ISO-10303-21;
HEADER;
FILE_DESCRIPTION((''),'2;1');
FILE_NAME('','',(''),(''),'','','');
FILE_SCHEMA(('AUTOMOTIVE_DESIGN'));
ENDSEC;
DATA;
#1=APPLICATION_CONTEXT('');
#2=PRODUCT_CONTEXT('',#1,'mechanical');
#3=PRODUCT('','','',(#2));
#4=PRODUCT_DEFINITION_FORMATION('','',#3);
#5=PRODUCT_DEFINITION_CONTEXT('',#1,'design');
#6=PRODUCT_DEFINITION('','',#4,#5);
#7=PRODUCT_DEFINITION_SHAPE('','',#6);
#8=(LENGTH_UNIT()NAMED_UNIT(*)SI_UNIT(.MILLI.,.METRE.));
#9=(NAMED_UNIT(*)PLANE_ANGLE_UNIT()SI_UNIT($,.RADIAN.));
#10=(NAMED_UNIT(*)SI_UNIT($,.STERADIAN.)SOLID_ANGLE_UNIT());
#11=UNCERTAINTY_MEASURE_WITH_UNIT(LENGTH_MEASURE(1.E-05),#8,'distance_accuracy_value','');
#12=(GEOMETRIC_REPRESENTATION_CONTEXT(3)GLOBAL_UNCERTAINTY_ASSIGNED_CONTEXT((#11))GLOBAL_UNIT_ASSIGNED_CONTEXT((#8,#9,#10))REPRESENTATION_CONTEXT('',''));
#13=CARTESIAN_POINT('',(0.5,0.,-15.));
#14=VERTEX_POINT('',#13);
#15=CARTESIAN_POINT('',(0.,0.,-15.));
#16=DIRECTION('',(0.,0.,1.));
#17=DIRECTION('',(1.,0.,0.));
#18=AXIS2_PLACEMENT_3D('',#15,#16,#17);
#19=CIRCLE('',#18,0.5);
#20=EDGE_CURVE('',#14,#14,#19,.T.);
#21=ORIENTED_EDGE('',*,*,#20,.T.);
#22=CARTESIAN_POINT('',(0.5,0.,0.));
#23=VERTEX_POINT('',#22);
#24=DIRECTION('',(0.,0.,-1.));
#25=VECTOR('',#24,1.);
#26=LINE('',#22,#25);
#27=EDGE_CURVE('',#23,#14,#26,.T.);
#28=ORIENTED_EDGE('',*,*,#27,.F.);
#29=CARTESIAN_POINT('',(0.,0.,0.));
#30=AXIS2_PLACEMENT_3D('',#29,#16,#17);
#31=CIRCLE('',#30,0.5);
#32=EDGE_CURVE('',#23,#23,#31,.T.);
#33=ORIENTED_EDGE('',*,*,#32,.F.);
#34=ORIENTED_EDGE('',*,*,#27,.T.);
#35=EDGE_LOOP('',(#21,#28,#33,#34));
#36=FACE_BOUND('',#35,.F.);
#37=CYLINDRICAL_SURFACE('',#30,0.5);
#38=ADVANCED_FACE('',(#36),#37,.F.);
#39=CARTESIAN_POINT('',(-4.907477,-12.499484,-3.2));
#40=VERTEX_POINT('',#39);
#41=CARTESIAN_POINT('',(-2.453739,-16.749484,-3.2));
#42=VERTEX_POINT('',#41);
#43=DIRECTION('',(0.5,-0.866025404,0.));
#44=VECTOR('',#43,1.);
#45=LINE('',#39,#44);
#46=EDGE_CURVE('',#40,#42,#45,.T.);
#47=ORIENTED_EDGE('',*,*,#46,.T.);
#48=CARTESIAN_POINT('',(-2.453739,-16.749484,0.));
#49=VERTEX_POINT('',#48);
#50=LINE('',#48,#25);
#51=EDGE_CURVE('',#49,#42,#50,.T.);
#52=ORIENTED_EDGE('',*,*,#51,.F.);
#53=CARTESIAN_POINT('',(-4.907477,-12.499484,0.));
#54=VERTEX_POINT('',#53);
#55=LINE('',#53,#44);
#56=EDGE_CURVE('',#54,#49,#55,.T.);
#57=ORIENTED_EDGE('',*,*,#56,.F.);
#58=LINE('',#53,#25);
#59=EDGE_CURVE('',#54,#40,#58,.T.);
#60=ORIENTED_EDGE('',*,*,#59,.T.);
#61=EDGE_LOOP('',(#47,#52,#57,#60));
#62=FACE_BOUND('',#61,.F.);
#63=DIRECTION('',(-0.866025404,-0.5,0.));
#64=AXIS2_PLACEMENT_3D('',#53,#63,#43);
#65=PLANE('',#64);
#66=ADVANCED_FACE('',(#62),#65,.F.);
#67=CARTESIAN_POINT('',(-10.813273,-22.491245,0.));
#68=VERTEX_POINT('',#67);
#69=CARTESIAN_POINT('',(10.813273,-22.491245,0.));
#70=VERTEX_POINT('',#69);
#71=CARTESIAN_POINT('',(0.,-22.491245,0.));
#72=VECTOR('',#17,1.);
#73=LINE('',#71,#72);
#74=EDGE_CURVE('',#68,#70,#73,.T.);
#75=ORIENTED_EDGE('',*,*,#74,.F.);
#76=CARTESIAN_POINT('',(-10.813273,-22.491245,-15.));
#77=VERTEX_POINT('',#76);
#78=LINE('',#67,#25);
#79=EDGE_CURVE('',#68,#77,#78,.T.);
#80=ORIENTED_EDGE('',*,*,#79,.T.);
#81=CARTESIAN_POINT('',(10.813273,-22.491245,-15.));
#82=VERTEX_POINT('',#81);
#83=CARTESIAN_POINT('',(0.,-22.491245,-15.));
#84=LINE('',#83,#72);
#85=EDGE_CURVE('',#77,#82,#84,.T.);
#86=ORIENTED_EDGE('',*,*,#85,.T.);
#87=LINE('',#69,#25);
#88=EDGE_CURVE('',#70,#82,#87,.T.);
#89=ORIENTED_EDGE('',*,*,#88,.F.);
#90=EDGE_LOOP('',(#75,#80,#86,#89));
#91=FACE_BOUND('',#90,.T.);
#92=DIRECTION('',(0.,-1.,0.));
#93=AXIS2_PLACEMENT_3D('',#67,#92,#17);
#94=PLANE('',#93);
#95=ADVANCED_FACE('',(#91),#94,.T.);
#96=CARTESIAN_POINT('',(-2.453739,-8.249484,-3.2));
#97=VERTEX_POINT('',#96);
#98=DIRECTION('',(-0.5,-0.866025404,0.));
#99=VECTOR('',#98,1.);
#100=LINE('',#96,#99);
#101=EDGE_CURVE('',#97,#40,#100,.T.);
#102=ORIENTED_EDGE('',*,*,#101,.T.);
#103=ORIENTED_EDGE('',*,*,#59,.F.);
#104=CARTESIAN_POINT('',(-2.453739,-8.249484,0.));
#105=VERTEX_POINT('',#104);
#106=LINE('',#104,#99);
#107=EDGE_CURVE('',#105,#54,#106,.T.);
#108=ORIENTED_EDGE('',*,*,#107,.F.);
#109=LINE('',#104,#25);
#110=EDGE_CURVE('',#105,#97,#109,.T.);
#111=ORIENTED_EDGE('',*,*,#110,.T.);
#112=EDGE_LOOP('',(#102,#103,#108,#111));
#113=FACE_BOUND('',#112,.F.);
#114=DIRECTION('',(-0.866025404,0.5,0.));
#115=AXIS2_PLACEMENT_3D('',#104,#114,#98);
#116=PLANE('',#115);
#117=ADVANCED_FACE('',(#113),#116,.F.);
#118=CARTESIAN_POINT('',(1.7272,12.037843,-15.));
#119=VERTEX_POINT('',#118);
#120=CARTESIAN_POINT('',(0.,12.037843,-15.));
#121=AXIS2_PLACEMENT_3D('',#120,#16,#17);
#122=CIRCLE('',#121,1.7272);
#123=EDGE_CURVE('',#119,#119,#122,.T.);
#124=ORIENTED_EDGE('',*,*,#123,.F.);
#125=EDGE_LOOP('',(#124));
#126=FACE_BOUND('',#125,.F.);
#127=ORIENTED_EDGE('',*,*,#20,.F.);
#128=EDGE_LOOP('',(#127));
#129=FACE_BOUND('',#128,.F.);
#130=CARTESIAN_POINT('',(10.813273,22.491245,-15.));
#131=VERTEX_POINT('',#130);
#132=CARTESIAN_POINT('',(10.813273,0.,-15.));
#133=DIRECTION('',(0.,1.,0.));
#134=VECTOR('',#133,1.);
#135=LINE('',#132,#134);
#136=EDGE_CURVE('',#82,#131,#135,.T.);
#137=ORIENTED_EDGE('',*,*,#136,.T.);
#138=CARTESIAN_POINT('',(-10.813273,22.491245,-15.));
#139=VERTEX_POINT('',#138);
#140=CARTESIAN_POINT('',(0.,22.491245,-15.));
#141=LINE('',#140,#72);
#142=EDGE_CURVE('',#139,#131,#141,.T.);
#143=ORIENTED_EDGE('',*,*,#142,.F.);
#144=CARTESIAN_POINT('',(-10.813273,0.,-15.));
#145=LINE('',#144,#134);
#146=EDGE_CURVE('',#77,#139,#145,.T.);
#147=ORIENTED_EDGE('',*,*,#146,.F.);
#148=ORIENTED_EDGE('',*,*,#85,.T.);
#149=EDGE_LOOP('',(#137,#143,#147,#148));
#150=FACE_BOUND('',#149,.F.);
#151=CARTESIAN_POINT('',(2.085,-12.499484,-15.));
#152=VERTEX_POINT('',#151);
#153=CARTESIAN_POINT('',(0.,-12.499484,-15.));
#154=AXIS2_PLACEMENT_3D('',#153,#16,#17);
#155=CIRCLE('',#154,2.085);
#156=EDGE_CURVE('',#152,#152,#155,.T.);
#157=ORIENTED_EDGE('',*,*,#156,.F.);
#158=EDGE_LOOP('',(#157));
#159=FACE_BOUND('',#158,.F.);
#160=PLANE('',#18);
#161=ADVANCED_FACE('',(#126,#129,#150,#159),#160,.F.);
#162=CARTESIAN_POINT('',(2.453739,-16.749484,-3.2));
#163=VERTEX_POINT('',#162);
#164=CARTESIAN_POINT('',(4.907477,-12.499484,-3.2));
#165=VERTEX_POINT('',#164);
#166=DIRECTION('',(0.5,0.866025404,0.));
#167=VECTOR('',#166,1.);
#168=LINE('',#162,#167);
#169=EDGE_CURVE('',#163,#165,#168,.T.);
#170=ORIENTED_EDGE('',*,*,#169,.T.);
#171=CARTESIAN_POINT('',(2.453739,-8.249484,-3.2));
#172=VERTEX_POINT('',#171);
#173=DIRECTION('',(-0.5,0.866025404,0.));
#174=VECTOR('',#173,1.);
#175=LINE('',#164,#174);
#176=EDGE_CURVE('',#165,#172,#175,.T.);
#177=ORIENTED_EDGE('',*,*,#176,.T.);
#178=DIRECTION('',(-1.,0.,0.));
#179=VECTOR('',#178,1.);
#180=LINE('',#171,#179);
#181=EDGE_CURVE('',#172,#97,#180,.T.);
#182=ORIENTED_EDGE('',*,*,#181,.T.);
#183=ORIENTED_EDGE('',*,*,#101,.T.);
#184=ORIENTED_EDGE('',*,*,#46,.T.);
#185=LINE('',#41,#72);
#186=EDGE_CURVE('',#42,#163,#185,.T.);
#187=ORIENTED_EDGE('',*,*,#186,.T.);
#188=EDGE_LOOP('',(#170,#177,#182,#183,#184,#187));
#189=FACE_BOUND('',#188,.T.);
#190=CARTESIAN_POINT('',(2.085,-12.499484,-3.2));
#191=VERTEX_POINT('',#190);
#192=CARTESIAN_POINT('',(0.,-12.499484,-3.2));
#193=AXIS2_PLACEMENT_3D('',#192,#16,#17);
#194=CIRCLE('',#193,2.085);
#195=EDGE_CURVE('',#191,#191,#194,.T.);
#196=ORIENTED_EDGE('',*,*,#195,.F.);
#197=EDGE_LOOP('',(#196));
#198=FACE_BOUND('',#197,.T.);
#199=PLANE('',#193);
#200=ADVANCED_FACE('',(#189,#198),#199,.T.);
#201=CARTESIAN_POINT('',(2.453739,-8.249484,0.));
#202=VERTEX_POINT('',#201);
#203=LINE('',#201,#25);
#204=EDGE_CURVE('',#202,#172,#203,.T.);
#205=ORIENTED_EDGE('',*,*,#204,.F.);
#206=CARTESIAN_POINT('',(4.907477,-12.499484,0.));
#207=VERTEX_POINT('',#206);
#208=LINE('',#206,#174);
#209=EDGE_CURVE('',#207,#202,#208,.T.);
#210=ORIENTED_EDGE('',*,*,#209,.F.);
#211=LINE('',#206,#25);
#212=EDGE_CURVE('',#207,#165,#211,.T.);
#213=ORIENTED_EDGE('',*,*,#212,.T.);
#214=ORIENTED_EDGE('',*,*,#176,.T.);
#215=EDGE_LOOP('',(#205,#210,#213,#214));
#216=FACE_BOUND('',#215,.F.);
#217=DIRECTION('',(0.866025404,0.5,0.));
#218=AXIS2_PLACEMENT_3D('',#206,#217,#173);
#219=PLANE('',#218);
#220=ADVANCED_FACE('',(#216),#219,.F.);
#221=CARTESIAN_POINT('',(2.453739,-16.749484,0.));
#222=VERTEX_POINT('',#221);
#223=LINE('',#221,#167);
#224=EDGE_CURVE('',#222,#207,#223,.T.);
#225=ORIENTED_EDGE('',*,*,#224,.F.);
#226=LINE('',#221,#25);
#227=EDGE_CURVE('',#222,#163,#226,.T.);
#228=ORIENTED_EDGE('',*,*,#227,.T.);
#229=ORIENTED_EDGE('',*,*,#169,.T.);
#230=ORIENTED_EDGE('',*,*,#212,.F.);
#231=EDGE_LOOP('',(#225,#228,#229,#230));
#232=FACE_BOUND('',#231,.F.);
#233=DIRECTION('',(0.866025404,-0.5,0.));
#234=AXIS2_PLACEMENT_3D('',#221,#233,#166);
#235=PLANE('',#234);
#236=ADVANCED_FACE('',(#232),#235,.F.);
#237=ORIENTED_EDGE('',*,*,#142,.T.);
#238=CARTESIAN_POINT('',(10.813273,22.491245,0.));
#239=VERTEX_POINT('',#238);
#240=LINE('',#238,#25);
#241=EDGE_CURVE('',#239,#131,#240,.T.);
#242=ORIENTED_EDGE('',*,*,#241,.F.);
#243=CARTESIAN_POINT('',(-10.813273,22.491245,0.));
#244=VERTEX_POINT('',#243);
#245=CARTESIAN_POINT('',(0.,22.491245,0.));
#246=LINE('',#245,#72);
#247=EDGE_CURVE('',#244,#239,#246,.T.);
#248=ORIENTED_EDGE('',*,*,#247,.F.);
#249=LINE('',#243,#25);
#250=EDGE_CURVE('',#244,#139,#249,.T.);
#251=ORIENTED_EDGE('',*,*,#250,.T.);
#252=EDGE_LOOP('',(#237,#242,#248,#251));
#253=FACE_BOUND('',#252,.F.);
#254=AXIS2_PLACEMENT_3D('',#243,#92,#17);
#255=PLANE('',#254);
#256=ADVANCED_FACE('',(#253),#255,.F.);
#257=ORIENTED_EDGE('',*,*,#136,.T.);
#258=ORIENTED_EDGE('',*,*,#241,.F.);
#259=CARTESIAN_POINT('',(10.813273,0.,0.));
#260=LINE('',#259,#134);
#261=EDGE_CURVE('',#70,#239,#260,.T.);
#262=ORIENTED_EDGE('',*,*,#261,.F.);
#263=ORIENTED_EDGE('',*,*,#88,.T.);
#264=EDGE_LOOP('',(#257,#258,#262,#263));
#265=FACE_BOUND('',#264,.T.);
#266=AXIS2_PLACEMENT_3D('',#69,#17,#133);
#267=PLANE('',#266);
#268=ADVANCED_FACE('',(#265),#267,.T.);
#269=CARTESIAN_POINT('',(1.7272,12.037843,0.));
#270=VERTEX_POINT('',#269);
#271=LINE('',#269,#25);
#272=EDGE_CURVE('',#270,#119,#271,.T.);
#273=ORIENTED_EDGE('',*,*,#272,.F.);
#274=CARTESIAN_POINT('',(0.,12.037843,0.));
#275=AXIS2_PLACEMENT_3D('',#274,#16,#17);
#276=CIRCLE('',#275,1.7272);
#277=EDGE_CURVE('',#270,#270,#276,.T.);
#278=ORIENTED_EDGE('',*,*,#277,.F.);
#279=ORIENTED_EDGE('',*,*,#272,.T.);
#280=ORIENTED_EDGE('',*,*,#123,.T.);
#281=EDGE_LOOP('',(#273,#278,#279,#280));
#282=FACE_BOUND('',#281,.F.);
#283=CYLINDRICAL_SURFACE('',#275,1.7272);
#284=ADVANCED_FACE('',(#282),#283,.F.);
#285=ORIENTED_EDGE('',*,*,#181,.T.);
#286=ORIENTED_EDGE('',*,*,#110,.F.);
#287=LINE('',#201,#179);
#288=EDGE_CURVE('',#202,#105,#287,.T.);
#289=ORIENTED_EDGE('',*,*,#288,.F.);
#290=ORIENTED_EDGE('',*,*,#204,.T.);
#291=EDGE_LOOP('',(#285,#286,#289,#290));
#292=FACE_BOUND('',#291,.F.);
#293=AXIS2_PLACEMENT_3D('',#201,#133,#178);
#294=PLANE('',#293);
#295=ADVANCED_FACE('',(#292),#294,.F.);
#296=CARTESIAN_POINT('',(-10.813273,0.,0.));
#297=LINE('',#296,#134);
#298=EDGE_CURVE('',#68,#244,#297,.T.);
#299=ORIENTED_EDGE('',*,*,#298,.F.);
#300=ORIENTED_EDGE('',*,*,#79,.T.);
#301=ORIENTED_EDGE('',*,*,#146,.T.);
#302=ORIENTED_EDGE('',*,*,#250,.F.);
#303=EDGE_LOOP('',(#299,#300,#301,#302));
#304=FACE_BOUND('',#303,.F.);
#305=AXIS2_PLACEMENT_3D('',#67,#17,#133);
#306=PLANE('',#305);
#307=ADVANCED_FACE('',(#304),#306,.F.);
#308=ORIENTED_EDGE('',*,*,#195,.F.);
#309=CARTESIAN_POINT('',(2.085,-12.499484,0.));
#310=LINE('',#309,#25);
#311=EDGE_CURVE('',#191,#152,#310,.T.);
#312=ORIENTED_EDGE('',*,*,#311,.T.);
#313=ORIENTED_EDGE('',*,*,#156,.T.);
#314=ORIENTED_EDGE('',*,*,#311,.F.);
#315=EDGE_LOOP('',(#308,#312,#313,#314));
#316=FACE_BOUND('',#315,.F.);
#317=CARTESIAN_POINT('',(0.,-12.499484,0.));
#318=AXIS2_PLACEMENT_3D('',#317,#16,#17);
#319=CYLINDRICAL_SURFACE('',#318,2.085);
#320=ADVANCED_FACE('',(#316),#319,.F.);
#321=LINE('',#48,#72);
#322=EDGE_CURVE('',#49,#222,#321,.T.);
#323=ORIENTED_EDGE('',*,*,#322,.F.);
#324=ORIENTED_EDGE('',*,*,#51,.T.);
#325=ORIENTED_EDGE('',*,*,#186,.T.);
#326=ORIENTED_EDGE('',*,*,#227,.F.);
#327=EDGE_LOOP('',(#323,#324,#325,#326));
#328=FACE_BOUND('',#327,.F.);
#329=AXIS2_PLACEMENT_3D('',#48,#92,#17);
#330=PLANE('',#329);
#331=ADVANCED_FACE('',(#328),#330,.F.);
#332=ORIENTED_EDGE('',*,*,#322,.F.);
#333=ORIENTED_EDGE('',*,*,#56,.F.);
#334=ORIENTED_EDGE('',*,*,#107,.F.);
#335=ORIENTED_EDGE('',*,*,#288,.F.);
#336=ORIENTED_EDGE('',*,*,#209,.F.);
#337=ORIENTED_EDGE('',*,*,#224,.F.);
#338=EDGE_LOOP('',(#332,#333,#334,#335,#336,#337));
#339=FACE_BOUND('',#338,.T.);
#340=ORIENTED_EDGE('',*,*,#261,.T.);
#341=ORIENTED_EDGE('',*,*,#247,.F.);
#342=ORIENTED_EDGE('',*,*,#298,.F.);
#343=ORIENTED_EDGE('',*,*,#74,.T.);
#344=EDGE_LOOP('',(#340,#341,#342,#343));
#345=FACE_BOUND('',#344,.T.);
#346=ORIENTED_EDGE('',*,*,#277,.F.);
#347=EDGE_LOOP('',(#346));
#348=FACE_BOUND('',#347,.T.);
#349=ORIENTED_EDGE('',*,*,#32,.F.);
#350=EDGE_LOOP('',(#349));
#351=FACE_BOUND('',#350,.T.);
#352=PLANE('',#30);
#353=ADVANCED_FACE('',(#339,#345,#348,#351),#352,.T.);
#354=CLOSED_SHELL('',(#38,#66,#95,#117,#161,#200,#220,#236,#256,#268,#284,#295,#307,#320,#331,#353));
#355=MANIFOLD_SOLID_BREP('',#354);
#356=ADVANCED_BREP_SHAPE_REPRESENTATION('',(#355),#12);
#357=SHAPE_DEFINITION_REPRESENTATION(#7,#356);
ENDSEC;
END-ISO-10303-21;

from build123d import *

# Parameters (mm, degrees)
F0_W     = 21.6265451163
F0_H     = 44.9824891984
F0_R     = 0.5
F0_R_2   = 1.7272
F0_R_3   = 2.085
F1_DEPTH = 15
F2_DEPTH = 3.2


# Not quite as in the source:
# - a feature names something its author has since deleted; it is built from what else it names


with BuildPart() as f1:
    # F0 (on Top) → F1 (new body)
    with BuildSketch(Plane.XY):
        Rectangle(F0_W, F0_H)
        Polygon((-4.9074772881, -12.4994842336), (-2.4537386441, -8.2494842336), (2.4537386441, -8.2494842336), (4.9074772881, -12.4994842336), (2.4537386441, -16.7494842336), (-2.4537386441, -16.7494842336), align=None, mode=Mode.SUBTRACT)
        Circle(F0_R, mode=Mode.SUBTRACT)
        with Locations((0, 12.0378434658)):
            Circle(F0_R_2, mode=Mode.SUBTRACT)
        Polygon((2.4537386441, -8.2494842336), (-2.4537386441, -8.2494842336), (-4.9074772881, -12.4994842336), (-2.4537386441, -16.7494842336), (2.4537386441, -16.7494842336), (4.9074772881, -12.4994842336), align=None)
        with Locations((0, -12.4994842336)):
            Circle(F0_R_3, mode=Mode.SUBTRACT)
    extrude(amount=-F1_DEPTH)

    # F0 (on Top) → F2 (cut)
    with BuildSketch(Plane.XY):
        Polygon((2.4537386441, -8.2494842336), (-2.4537386441, -8.2494842336), (-4.9074772881, -12.4994842336), (-2.4537386441, -16.7494842336), (2.4537386441, -16.7494842336), (4.9074772881, -12.4994842336), align=None)
        with Locations((0, -12.4994842336)):
            Circle(F0_R_3, mode=Mode.SUBTRACT)
    extrude(amount=-F2_DEPTH, mode=Mode.SUBTRACT)


solid = f1.part
